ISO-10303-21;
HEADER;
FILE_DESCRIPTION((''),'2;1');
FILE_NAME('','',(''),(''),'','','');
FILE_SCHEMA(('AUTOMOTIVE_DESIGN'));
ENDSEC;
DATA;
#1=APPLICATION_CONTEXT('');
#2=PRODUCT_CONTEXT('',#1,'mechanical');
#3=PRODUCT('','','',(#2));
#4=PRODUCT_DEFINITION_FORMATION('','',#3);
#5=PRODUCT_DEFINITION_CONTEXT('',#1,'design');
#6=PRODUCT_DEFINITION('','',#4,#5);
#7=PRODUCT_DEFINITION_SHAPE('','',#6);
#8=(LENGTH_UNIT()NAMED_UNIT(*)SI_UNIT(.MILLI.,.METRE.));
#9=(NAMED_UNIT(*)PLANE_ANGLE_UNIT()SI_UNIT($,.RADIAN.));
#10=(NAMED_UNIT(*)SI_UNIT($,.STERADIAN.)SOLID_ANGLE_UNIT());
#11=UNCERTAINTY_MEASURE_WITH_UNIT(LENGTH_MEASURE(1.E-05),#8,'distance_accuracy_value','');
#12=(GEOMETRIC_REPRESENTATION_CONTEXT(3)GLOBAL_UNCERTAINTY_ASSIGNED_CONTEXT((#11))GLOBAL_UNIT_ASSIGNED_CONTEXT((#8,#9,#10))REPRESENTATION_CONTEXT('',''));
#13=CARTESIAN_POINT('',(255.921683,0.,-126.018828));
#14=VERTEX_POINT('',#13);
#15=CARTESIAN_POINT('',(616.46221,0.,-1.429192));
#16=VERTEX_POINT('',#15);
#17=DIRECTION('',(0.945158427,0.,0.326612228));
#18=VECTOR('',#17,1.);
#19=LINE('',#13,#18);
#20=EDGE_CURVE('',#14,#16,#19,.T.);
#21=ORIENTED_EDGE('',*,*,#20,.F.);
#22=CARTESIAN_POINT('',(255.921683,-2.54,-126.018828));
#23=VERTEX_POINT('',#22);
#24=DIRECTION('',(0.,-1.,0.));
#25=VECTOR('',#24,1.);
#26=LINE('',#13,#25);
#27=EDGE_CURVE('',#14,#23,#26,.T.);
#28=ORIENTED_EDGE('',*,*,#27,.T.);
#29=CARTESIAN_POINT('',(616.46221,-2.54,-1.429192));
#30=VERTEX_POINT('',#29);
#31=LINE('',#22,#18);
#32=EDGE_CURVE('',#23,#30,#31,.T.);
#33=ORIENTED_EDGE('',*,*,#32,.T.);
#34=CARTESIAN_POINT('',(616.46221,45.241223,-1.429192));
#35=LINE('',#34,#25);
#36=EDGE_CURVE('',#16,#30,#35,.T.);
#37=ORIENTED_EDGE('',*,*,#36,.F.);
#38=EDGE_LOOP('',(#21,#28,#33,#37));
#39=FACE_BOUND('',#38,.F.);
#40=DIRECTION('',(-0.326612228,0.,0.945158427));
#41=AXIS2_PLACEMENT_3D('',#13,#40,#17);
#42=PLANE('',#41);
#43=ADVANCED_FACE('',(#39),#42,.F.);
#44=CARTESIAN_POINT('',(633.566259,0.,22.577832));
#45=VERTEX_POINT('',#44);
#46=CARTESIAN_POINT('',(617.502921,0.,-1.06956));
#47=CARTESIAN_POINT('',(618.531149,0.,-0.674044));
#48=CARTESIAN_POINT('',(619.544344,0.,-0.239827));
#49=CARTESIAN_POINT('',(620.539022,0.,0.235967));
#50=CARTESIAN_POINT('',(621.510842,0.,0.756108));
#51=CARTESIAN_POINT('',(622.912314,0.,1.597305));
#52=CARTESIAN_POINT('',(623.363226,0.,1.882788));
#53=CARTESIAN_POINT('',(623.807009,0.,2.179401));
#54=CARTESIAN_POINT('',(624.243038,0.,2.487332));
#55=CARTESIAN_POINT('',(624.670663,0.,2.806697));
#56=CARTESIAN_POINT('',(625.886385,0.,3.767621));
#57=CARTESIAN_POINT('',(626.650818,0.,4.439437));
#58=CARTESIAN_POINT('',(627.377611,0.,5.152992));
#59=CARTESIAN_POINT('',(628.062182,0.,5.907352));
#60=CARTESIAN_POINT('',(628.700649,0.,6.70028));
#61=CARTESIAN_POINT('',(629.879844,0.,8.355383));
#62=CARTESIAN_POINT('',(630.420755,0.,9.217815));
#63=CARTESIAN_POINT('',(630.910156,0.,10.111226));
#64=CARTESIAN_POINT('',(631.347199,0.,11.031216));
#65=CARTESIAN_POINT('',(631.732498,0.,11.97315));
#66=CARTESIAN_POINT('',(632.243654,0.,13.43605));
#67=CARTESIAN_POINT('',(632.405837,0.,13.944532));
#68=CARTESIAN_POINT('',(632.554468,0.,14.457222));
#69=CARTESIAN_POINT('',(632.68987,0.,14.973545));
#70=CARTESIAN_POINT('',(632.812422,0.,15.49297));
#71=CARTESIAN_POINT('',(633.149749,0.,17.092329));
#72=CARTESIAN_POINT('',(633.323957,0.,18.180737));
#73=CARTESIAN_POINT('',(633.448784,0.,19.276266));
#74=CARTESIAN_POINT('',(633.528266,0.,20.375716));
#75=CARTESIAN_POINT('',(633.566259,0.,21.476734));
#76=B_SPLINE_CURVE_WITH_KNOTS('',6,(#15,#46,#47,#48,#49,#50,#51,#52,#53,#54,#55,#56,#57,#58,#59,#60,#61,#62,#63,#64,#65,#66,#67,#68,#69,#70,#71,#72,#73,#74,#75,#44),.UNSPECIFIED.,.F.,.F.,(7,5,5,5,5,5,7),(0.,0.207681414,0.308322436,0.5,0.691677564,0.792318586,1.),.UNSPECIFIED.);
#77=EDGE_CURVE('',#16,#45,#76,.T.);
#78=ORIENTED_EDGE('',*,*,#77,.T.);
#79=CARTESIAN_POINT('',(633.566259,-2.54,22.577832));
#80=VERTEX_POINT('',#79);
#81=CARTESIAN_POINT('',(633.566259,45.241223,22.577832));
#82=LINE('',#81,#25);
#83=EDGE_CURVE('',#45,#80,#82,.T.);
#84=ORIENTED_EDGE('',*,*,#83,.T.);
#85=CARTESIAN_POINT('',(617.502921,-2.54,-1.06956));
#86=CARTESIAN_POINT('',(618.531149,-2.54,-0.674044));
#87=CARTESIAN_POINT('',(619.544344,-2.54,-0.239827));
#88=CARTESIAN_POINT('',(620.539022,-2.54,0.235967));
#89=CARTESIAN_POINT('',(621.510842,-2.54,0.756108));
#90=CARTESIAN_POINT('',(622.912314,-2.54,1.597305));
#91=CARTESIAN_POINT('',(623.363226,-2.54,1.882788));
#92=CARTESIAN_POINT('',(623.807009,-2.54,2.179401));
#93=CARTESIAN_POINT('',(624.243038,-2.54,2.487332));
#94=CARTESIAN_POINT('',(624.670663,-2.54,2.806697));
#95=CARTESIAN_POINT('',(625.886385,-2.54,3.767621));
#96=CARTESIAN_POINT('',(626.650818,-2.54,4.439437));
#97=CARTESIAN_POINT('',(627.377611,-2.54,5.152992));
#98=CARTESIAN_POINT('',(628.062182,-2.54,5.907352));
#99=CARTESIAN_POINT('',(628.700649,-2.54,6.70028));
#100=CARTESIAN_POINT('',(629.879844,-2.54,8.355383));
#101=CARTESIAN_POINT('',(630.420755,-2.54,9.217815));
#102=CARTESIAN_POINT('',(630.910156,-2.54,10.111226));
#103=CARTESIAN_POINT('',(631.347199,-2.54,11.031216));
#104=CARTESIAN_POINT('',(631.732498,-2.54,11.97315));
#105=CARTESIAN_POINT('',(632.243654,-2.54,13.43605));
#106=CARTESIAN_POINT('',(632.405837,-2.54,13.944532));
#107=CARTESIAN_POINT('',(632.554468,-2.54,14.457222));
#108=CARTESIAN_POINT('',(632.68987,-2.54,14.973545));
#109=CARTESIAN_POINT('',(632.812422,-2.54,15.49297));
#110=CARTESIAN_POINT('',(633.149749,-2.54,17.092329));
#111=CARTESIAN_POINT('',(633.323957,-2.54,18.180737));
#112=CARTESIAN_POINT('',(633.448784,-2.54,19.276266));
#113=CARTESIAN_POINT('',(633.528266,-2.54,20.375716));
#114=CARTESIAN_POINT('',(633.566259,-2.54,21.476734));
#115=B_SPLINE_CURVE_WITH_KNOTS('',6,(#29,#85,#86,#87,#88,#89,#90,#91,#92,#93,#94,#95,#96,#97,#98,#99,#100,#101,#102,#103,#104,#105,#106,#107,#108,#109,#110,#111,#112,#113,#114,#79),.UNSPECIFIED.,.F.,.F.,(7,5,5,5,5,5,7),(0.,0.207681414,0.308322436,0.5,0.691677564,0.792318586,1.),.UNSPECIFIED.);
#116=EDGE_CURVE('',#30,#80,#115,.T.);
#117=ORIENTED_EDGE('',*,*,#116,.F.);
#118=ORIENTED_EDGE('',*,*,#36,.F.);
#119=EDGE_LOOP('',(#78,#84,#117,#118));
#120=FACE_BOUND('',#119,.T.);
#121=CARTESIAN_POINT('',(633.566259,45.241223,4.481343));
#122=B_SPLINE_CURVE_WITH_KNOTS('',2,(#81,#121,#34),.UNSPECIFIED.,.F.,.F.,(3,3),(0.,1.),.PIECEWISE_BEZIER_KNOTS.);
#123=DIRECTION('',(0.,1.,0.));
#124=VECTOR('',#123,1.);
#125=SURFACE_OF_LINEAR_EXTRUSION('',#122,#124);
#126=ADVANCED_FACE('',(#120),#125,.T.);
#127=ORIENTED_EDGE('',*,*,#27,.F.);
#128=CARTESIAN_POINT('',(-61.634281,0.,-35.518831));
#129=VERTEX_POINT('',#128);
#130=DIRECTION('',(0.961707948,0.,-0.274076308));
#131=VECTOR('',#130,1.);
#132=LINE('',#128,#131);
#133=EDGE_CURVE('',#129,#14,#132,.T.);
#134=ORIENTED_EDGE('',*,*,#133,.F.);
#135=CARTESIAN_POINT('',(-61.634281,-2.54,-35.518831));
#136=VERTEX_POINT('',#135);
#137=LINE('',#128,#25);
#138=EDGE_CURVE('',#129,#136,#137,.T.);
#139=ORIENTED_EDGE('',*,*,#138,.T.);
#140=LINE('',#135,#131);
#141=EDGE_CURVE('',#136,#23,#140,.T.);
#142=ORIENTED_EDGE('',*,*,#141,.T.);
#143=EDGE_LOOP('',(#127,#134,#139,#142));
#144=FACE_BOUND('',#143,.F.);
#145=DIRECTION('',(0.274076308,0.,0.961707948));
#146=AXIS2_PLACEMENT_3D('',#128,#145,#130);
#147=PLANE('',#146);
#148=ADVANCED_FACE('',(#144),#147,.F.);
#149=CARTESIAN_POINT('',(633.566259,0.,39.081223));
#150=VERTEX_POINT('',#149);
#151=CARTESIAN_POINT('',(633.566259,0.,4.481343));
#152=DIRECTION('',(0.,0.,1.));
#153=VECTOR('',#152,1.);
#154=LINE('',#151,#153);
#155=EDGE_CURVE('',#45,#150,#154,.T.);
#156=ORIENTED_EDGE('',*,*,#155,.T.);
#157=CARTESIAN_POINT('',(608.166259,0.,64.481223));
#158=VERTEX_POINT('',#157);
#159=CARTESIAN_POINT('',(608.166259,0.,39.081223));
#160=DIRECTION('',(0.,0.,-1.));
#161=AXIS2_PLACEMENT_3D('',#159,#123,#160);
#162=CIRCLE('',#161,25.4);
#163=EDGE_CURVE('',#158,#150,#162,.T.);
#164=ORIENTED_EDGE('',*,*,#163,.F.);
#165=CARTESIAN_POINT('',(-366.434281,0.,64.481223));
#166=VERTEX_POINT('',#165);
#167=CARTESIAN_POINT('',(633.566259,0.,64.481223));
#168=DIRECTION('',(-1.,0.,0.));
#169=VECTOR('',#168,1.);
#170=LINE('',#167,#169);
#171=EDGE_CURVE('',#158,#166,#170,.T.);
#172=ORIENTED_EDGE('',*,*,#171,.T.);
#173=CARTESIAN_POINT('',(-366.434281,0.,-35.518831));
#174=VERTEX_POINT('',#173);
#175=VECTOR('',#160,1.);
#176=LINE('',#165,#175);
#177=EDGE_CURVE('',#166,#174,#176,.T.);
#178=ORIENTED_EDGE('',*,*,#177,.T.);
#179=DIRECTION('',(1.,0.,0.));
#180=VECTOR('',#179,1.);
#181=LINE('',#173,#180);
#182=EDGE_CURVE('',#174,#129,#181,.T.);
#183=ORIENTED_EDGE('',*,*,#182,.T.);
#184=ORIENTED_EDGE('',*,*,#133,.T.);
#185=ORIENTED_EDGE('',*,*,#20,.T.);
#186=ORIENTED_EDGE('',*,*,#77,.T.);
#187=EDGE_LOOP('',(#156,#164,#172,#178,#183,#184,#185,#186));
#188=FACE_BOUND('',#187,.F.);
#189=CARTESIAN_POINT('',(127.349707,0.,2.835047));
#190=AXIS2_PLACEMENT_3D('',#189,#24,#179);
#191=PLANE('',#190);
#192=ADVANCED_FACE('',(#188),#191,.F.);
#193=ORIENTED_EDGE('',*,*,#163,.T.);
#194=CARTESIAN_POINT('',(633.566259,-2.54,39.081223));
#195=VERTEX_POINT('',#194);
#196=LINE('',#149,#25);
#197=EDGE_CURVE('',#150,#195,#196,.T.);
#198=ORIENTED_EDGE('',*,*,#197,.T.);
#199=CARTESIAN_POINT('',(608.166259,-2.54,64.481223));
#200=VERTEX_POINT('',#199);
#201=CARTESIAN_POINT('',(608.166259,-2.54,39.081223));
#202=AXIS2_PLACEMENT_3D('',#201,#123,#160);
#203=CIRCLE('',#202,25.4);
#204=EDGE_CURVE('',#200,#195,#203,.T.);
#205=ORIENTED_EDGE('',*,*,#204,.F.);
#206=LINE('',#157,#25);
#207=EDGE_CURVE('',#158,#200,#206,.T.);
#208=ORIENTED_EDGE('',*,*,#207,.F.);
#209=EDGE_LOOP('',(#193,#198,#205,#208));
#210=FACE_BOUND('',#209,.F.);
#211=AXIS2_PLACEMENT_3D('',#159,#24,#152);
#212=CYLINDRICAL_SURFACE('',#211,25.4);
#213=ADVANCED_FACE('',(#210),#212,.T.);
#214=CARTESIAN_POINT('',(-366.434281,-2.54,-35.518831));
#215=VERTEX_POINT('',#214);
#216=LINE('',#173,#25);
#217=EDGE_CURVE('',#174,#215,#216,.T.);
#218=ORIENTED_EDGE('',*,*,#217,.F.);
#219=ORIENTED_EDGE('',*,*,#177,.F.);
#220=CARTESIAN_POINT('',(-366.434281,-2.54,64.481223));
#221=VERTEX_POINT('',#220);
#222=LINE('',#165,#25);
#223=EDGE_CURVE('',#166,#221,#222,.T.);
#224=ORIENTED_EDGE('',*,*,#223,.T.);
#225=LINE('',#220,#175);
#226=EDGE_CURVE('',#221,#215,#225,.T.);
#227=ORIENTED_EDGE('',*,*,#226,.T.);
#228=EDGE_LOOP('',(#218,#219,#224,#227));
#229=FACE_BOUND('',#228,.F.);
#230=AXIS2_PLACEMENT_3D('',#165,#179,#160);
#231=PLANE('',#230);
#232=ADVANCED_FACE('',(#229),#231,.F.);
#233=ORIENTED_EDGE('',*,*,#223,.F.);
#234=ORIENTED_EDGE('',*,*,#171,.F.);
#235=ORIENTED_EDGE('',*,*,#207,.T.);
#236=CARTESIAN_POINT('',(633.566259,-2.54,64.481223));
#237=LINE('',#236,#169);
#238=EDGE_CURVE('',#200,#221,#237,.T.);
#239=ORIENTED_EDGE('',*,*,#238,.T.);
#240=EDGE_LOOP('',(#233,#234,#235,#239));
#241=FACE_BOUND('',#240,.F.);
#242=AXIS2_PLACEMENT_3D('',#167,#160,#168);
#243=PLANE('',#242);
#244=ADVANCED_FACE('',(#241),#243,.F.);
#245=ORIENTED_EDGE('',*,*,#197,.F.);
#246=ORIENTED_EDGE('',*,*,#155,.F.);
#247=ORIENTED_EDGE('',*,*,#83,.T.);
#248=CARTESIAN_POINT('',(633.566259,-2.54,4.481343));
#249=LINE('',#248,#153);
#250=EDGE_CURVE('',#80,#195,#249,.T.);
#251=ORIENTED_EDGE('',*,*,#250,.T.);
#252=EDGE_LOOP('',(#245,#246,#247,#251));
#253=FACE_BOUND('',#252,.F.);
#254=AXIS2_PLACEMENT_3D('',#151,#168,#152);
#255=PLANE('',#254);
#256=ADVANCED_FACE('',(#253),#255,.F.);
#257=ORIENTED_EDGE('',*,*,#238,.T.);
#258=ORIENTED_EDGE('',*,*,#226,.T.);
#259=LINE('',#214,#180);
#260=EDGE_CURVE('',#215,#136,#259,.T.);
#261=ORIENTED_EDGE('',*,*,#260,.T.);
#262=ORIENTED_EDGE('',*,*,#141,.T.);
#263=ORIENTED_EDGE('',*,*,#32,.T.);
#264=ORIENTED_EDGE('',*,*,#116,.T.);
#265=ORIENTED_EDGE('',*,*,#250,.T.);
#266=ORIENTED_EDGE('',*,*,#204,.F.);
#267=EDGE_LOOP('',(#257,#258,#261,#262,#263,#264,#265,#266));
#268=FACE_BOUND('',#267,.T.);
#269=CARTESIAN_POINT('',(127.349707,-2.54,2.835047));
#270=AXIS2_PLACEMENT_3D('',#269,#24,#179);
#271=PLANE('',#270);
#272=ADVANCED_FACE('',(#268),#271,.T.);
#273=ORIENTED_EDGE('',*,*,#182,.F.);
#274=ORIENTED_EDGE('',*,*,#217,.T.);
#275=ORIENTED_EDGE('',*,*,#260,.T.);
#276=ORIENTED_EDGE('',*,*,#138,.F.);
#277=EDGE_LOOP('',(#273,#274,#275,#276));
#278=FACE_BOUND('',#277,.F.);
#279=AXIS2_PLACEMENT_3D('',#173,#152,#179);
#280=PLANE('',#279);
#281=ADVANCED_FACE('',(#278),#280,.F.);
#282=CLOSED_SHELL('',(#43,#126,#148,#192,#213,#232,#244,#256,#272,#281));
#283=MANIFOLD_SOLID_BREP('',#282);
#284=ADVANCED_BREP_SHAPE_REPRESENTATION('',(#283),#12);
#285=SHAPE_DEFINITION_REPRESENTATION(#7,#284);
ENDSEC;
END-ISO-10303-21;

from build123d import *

# Parameters (mm, degrees)
F1_DEPTH    = 2.54
F2_R        = 25.4
F3_T1_DEPTH = 93.0224467373


# Not quite as in the source:
# - a fillet or chamfer that OpenCascade refuses, or shapes differently, is made with other operations: its cross-section is extruded or revolved along the edge and cut away or added


with BuildPart() as f1:
    # F0 (on Front) → F1 (new body)
    with BuildSketch(Plane.XZ):
        Polygon((633.5662589781, 64.4812225811), (-366.4342810219, 64.4812225811), (-366.4342810219, -35.5188314189), (-61.6342810219, -35.5188314189), (255.9216834619, -126.0188282189), (633.5662589781, 4.4813425811), align=None)
    extrude(amount=F1_DEPTH)

    # F2
    f2_edges = [f1.edges().sort_by_distance(p)[0] for p in [
        (633.566259, -1.27, 64.481223),
    ]]
    fillet(f2_edges, radius=F2_R)

    # F3: fillet of radius 25.4 on 1 edges, made by hand

    # F3_s2 → F3_t1 (cut)
    with BuildSketch(Plane.XZ.offset(-45.2412233686)):
        with BuildLine():
            add(Edge.make_bspline(
                [(633.5662589781, 22.5778319285), (633.5662589781, 4.4813425811), (616.4622095682, -1.4291921229)],
                knots=[0, 0, 0, 1, 1, 1], degree=2, weights=[1, 1, 1]))
            Line((616.4622095682, -1.4291921229), (633.5662589781, 4.4813425811))
            Line((633.5662589781, 4.4813425811), (633.5662589781, 22.5778319285))
        make_face()
    extrude(amount=F3_T1_DEPTH, mode=Mode.SUBTRACT)


solid = f1.part
